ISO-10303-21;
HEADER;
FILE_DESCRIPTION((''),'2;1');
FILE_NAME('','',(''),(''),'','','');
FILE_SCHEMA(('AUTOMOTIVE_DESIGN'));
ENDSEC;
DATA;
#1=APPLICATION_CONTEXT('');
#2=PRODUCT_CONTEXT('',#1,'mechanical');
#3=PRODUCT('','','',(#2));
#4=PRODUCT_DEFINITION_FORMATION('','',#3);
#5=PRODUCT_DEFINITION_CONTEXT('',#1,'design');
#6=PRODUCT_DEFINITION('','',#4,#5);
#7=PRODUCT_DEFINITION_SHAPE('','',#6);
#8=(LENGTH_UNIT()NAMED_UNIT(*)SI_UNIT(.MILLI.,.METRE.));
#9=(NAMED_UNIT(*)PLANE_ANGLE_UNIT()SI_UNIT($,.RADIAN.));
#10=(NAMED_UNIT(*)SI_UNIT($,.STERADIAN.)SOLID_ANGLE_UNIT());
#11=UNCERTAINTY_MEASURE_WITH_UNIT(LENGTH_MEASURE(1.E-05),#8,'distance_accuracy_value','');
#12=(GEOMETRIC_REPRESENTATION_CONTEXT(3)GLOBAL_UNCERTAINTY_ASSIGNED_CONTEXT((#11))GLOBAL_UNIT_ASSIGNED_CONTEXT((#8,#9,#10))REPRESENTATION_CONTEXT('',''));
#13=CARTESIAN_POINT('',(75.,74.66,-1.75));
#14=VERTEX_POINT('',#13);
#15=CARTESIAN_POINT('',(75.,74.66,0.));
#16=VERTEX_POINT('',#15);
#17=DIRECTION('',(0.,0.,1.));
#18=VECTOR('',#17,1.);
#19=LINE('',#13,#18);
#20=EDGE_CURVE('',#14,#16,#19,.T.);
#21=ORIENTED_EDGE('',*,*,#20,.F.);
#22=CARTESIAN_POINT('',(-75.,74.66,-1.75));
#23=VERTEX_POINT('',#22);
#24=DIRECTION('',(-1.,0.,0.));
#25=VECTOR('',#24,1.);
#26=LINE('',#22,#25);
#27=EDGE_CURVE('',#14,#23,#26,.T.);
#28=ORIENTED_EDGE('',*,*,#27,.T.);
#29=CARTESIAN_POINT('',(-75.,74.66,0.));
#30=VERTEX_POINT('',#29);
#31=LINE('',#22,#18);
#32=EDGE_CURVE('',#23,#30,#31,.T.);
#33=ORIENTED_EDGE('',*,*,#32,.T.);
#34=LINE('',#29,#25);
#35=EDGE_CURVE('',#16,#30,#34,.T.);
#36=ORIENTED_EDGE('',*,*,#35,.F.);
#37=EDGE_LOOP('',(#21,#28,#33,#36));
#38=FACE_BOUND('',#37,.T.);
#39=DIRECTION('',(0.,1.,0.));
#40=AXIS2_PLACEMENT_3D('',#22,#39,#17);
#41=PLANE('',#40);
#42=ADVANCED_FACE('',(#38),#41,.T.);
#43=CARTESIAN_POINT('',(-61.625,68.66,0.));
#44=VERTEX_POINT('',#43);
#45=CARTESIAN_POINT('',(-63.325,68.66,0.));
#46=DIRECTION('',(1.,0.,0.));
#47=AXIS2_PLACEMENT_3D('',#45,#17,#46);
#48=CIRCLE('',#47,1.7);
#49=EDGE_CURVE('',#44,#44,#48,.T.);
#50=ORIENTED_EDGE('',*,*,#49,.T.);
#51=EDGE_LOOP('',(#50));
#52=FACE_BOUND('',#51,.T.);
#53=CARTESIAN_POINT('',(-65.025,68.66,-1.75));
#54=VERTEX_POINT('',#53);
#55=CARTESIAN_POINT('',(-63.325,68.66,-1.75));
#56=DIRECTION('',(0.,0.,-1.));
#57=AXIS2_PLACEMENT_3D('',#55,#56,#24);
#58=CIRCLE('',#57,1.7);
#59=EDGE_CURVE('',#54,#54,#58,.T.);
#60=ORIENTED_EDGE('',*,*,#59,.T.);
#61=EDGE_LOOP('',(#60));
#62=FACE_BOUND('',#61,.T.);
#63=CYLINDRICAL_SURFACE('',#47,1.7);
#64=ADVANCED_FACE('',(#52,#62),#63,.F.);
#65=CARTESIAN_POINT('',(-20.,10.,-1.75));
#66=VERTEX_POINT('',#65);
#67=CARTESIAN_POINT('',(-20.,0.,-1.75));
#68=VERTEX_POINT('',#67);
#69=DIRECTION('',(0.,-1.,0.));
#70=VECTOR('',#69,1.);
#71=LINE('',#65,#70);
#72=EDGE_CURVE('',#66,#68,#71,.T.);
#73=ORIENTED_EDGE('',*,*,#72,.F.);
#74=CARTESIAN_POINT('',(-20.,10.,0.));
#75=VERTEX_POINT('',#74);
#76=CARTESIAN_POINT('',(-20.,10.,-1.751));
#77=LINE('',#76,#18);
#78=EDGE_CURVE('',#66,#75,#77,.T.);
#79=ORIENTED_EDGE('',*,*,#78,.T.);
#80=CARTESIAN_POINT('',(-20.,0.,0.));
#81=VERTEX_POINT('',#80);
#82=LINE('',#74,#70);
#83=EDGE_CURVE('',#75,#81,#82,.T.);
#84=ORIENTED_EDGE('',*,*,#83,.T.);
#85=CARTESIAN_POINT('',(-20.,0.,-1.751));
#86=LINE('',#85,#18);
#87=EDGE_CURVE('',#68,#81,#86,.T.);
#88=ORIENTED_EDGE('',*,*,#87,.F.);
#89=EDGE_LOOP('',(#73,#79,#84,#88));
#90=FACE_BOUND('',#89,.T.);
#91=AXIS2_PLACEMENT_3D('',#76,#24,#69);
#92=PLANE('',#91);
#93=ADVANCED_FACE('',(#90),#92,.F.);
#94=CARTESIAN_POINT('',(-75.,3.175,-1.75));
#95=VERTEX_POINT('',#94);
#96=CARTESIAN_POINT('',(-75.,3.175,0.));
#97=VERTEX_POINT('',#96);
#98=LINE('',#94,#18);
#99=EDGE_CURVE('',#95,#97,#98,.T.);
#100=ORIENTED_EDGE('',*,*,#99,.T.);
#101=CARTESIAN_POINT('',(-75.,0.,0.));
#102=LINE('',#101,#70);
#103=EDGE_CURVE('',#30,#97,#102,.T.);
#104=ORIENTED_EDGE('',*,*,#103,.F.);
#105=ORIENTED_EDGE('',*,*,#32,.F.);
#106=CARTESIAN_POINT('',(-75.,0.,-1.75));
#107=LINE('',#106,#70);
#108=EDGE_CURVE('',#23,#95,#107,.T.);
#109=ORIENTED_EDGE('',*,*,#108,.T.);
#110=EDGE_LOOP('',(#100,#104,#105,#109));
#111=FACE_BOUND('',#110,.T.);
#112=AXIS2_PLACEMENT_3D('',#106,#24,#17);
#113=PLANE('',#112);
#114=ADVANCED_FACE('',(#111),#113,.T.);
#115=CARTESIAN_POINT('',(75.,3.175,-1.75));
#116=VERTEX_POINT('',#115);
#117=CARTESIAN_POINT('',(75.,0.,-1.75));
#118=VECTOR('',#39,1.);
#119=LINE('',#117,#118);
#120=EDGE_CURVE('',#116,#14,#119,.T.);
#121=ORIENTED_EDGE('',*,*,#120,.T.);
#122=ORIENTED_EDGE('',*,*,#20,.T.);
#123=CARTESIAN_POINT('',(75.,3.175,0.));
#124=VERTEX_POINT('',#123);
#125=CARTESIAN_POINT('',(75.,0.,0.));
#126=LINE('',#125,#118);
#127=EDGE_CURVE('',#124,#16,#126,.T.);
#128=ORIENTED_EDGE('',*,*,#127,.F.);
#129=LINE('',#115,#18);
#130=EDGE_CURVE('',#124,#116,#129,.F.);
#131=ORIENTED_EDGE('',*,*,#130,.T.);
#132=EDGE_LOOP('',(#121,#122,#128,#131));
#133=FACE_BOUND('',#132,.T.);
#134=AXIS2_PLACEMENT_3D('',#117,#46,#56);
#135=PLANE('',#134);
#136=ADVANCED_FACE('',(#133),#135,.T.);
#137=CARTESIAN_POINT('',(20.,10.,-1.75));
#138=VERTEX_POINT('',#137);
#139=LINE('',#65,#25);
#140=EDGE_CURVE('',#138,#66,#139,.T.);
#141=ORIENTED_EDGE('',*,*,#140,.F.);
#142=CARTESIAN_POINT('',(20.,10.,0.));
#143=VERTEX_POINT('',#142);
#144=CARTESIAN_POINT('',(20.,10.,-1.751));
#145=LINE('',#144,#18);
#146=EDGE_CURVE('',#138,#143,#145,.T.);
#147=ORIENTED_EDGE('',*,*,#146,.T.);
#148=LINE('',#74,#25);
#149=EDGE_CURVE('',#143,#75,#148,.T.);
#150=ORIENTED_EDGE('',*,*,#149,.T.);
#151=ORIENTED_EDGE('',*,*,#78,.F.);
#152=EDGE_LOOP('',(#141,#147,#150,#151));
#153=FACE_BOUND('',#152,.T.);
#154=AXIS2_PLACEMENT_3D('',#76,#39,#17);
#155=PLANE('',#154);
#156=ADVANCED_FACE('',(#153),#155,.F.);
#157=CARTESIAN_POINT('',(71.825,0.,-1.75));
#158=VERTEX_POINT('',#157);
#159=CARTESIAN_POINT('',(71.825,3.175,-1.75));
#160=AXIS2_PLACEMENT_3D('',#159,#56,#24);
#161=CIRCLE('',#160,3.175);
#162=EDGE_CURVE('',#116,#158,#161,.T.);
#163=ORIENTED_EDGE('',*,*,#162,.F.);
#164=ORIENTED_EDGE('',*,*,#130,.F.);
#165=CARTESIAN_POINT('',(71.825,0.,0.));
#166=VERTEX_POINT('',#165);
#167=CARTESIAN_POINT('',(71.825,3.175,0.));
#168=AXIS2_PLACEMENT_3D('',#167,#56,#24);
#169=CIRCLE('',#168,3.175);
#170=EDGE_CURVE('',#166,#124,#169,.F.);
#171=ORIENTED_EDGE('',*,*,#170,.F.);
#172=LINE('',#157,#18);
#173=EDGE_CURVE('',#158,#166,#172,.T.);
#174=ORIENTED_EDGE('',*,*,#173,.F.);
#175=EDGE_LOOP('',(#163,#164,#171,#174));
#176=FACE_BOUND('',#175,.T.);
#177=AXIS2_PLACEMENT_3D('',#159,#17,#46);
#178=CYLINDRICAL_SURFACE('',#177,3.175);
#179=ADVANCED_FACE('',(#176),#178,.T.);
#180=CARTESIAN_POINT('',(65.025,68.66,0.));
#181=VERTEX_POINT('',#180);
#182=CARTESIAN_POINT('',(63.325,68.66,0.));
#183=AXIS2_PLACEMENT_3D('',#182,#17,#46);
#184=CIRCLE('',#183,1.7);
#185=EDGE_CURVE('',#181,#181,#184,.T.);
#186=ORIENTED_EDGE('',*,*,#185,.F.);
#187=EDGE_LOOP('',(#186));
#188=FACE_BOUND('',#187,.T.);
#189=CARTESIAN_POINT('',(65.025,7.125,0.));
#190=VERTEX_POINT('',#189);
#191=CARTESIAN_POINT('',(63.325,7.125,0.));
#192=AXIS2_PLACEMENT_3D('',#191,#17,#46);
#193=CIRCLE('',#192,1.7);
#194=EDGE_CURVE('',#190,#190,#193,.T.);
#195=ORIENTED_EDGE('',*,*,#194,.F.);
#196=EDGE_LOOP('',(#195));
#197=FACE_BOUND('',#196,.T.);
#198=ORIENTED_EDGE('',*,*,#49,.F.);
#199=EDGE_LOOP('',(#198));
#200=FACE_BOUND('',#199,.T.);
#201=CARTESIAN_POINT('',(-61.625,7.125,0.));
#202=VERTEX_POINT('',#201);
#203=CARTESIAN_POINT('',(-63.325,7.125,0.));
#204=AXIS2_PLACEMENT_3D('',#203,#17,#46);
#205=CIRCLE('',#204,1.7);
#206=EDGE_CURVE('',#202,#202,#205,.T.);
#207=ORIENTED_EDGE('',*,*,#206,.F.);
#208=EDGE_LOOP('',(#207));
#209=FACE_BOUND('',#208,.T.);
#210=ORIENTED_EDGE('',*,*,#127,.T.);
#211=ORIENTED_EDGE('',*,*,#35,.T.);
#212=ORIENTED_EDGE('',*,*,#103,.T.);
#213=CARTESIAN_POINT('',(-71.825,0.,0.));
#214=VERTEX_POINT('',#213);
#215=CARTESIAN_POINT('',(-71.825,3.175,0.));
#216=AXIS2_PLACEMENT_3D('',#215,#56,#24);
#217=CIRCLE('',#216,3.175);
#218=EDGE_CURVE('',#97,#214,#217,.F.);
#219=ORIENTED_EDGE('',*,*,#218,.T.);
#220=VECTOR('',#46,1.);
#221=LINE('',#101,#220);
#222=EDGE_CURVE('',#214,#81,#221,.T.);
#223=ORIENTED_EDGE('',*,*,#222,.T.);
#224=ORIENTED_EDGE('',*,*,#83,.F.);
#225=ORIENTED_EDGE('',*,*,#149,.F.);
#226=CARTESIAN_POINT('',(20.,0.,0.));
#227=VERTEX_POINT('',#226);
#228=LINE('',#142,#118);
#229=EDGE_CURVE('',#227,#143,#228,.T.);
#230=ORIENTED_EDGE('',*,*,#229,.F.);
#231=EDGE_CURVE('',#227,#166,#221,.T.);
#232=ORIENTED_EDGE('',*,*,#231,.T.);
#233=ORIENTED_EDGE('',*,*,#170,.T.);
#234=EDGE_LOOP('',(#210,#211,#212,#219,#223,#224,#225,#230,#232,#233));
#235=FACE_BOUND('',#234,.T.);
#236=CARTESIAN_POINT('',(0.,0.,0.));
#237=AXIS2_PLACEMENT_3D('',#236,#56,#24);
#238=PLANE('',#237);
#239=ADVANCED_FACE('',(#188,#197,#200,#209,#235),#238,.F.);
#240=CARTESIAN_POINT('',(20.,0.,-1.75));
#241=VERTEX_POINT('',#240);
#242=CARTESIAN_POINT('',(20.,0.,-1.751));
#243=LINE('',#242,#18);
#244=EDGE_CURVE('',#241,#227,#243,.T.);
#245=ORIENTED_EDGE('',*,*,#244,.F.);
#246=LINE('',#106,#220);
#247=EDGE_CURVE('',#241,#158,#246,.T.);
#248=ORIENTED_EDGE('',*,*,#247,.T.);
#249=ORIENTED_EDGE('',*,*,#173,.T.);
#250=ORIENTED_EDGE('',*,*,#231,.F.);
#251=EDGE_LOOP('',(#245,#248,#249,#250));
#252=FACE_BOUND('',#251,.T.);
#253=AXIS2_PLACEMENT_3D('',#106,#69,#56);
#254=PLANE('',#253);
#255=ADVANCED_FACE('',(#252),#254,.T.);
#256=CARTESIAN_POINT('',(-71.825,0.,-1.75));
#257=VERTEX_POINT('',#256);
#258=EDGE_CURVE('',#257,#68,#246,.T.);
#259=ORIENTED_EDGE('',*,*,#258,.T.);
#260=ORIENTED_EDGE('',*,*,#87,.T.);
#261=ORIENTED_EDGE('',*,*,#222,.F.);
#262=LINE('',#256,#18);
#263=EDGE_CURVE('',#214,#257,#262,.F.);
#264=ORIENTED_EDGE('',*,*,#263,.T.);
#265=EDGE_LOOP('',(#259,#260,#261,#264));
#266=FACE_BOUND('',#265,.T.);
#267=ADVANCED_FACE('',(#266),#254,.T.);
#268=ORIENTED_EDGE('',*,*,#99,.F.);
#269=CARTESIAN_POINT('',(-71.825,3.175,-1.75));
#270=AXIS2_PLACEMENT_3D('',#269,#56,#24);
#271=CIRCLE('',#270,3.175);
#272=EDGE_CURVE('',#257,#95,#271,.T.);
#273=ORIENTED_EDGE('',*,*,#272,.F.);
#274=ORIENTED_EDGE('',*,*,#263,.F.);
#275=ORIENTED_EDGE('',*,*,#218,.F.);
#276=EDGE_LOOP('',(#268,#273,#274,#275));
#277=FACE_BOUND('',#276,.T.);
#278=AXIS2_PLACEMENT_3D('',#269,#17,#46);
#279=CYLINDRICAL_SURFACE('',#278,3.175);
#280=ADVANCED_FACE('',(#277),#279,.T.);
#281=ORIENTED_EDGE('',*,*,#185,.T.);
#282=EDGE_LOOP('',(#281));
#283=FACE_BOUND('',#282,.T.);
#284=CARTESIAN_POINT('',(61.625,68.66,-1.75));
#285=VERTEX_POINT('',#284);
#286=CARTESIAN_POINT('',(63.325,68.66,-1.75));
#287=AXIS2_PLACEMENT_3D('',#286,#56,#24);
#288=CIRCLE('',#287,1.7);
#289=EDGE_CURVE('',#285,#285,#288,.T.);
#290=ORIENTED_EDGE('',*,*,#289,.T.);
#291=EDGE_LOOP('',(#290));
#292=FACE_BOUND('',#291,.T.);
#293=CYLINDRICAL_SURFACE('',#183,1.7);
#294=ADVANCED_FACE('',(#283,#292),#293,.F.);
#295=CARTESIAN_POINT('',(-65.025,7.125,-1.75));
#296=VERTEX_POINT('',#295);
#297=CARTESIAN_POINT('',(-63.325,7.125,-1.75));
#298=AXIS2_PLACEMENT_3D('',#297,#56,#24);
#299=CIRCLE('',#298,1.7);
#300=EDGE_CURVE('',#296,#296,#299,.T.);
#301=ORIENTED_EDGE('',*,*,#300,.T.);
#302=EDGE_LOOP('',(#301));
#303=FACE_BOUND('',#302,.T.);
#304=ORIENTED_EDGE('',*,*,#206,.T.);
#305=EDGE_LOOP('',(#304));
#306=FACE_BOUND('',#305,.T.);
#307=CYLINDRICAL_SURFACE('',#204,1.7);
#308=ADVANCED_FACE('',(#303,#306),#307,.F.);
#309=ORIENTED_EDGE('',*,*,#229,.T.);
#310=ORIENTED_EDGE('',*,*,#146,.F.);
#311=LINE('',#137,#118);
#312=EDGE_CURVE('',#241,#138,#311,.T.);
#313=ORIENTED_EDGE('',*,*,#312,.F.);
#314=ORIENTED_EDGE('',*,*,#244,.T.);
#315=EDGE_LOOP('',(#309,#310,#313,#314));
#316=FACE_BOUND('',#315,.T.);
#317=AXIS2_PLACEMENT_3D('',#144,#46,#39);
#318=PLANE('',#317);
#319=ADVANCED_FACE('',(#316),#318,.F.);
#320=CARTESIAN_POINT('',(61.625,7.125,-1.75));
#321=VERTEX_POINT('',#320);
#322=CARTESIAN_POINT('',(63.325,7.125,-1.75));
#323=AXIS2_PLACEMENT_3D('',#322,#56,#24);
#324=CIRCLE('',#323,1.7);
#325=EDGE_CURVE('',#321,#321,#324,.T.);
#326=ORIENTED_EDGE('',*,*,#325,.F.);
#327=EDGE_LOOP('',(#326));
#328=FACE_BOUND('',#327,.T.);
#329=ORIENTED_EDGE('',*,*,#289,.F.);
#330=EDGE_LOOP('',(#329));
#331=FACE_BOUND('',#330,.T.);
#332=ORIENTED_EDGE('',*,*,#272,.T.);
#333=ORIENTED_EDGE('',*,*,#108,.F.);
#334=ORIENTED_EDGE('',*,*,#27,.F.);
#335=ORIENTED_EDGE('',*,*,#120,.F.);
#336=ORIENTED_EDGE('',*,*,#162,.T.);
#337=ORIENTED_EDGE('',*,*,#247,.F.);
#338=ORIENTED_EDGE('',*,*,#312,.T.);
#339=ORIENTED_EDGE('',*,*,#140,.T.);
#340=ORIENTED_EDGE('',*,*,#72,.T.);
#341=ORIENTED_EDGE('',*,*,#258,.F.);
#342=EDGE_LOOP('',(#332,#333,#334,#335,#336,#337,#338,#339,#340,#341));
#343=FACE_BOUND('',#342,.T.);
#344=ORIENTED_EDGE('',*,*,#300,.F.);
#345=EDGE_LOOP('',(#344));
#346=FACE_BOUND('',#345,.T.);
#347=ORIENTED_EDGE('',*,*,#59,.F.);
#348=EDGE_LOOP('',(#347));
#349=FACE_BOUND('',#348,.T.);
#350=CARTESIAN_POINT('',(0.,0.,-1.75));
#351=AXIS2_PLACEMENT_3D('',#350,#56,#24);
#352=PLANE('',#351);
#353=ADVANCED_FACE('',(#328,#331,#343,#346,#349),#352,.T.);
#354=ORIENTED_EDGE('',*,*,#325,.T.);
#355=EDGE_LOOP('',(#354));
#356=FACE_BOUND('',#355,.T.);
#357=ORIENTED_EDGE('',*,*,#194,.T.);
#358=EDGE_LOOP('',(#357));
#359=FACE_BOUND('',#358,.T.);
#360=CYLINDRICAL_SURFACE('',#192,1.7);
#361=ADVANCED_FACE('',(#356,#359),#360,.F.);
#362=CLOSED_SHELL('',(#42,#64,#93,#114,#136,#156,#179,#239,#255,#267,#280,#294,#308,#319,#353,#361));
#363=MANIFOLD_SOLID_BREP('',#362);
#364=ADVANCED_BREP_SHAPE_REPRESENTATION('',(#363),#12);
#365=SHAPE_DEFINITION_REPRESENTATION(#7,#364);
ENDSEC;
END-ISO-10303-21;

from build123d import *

# Parameters (mm, degrees)
SKETCH1_W            = 150
SKETCH1_H            = 74.66
BASE_FLANGE1_DEPTH   = 1.75
CUT_EXTRUDE1_REACH   = 107.84
SKETCH2_W            = 40
SKETCH2_H            = 10
M3_CLEARANCE_HOLE1_D = 3.4
FILLET1_R            = 3.175


# Sheet-metal steps are written as plain solids
with BuildPart() as part:
    # Sketch1 → Base-Flange1 (new body)
    with BuildSketch(Plane.XY):
        with Locations((0, 37.33)):
            Rectangle(SKETCH1_W, SKETCH1_H)
    extrude(amount=-BASE_FLANGE1_DEPTH)

    # Sketch2 → Cut-Extrude1 (cut, up to next)
    with BuildSketch(Plane.XY, mode=Mode.PRIVATE) as cut_extrude1_sk1:
        with Locations((0, 5)):
            Rectangle(SKETCH2_W, SKETCH2_H)
    cut_extrude1_tool1 = extrude(cut_extrude1_sk1.sketch, amount=-CUT_EXTRUDE1_REACH, mode=Mode.PRIVATE) & part.part
    add(cut_extrude1_tool1.solids().sort_by_distance((0, 5, 0))[0], mode=Mode.SUBTRACT)

    # M3 Clearance Hole1 (through all)
    with Locations(Plane.XY):
        with Locations((63.325, 68.66), (63.325, 7.125)):
            m3_clearance_hole1 = Hole(M3_CLEARANCE_HOLE1_D / 2)

    # Mirror1: M3 Clearance Hole1 across plane
    add(m3_clearance_hole1.mirror(Plane(origin=(0, 0, 0), x_dir=(0, 0, 1), z_dir=(1, 0, 0))), mode=Mode.SUBTRACT)

    # Fillet1
    fillet1_edges = [part.edges().sort_by_distance(p)[0] for p in [
        (75, 0, -0.875),
        (-75, 0, -0.875),
    ]]
    fillet(fillet1_edges, radius=FILLET1_R)


solid = part.part
